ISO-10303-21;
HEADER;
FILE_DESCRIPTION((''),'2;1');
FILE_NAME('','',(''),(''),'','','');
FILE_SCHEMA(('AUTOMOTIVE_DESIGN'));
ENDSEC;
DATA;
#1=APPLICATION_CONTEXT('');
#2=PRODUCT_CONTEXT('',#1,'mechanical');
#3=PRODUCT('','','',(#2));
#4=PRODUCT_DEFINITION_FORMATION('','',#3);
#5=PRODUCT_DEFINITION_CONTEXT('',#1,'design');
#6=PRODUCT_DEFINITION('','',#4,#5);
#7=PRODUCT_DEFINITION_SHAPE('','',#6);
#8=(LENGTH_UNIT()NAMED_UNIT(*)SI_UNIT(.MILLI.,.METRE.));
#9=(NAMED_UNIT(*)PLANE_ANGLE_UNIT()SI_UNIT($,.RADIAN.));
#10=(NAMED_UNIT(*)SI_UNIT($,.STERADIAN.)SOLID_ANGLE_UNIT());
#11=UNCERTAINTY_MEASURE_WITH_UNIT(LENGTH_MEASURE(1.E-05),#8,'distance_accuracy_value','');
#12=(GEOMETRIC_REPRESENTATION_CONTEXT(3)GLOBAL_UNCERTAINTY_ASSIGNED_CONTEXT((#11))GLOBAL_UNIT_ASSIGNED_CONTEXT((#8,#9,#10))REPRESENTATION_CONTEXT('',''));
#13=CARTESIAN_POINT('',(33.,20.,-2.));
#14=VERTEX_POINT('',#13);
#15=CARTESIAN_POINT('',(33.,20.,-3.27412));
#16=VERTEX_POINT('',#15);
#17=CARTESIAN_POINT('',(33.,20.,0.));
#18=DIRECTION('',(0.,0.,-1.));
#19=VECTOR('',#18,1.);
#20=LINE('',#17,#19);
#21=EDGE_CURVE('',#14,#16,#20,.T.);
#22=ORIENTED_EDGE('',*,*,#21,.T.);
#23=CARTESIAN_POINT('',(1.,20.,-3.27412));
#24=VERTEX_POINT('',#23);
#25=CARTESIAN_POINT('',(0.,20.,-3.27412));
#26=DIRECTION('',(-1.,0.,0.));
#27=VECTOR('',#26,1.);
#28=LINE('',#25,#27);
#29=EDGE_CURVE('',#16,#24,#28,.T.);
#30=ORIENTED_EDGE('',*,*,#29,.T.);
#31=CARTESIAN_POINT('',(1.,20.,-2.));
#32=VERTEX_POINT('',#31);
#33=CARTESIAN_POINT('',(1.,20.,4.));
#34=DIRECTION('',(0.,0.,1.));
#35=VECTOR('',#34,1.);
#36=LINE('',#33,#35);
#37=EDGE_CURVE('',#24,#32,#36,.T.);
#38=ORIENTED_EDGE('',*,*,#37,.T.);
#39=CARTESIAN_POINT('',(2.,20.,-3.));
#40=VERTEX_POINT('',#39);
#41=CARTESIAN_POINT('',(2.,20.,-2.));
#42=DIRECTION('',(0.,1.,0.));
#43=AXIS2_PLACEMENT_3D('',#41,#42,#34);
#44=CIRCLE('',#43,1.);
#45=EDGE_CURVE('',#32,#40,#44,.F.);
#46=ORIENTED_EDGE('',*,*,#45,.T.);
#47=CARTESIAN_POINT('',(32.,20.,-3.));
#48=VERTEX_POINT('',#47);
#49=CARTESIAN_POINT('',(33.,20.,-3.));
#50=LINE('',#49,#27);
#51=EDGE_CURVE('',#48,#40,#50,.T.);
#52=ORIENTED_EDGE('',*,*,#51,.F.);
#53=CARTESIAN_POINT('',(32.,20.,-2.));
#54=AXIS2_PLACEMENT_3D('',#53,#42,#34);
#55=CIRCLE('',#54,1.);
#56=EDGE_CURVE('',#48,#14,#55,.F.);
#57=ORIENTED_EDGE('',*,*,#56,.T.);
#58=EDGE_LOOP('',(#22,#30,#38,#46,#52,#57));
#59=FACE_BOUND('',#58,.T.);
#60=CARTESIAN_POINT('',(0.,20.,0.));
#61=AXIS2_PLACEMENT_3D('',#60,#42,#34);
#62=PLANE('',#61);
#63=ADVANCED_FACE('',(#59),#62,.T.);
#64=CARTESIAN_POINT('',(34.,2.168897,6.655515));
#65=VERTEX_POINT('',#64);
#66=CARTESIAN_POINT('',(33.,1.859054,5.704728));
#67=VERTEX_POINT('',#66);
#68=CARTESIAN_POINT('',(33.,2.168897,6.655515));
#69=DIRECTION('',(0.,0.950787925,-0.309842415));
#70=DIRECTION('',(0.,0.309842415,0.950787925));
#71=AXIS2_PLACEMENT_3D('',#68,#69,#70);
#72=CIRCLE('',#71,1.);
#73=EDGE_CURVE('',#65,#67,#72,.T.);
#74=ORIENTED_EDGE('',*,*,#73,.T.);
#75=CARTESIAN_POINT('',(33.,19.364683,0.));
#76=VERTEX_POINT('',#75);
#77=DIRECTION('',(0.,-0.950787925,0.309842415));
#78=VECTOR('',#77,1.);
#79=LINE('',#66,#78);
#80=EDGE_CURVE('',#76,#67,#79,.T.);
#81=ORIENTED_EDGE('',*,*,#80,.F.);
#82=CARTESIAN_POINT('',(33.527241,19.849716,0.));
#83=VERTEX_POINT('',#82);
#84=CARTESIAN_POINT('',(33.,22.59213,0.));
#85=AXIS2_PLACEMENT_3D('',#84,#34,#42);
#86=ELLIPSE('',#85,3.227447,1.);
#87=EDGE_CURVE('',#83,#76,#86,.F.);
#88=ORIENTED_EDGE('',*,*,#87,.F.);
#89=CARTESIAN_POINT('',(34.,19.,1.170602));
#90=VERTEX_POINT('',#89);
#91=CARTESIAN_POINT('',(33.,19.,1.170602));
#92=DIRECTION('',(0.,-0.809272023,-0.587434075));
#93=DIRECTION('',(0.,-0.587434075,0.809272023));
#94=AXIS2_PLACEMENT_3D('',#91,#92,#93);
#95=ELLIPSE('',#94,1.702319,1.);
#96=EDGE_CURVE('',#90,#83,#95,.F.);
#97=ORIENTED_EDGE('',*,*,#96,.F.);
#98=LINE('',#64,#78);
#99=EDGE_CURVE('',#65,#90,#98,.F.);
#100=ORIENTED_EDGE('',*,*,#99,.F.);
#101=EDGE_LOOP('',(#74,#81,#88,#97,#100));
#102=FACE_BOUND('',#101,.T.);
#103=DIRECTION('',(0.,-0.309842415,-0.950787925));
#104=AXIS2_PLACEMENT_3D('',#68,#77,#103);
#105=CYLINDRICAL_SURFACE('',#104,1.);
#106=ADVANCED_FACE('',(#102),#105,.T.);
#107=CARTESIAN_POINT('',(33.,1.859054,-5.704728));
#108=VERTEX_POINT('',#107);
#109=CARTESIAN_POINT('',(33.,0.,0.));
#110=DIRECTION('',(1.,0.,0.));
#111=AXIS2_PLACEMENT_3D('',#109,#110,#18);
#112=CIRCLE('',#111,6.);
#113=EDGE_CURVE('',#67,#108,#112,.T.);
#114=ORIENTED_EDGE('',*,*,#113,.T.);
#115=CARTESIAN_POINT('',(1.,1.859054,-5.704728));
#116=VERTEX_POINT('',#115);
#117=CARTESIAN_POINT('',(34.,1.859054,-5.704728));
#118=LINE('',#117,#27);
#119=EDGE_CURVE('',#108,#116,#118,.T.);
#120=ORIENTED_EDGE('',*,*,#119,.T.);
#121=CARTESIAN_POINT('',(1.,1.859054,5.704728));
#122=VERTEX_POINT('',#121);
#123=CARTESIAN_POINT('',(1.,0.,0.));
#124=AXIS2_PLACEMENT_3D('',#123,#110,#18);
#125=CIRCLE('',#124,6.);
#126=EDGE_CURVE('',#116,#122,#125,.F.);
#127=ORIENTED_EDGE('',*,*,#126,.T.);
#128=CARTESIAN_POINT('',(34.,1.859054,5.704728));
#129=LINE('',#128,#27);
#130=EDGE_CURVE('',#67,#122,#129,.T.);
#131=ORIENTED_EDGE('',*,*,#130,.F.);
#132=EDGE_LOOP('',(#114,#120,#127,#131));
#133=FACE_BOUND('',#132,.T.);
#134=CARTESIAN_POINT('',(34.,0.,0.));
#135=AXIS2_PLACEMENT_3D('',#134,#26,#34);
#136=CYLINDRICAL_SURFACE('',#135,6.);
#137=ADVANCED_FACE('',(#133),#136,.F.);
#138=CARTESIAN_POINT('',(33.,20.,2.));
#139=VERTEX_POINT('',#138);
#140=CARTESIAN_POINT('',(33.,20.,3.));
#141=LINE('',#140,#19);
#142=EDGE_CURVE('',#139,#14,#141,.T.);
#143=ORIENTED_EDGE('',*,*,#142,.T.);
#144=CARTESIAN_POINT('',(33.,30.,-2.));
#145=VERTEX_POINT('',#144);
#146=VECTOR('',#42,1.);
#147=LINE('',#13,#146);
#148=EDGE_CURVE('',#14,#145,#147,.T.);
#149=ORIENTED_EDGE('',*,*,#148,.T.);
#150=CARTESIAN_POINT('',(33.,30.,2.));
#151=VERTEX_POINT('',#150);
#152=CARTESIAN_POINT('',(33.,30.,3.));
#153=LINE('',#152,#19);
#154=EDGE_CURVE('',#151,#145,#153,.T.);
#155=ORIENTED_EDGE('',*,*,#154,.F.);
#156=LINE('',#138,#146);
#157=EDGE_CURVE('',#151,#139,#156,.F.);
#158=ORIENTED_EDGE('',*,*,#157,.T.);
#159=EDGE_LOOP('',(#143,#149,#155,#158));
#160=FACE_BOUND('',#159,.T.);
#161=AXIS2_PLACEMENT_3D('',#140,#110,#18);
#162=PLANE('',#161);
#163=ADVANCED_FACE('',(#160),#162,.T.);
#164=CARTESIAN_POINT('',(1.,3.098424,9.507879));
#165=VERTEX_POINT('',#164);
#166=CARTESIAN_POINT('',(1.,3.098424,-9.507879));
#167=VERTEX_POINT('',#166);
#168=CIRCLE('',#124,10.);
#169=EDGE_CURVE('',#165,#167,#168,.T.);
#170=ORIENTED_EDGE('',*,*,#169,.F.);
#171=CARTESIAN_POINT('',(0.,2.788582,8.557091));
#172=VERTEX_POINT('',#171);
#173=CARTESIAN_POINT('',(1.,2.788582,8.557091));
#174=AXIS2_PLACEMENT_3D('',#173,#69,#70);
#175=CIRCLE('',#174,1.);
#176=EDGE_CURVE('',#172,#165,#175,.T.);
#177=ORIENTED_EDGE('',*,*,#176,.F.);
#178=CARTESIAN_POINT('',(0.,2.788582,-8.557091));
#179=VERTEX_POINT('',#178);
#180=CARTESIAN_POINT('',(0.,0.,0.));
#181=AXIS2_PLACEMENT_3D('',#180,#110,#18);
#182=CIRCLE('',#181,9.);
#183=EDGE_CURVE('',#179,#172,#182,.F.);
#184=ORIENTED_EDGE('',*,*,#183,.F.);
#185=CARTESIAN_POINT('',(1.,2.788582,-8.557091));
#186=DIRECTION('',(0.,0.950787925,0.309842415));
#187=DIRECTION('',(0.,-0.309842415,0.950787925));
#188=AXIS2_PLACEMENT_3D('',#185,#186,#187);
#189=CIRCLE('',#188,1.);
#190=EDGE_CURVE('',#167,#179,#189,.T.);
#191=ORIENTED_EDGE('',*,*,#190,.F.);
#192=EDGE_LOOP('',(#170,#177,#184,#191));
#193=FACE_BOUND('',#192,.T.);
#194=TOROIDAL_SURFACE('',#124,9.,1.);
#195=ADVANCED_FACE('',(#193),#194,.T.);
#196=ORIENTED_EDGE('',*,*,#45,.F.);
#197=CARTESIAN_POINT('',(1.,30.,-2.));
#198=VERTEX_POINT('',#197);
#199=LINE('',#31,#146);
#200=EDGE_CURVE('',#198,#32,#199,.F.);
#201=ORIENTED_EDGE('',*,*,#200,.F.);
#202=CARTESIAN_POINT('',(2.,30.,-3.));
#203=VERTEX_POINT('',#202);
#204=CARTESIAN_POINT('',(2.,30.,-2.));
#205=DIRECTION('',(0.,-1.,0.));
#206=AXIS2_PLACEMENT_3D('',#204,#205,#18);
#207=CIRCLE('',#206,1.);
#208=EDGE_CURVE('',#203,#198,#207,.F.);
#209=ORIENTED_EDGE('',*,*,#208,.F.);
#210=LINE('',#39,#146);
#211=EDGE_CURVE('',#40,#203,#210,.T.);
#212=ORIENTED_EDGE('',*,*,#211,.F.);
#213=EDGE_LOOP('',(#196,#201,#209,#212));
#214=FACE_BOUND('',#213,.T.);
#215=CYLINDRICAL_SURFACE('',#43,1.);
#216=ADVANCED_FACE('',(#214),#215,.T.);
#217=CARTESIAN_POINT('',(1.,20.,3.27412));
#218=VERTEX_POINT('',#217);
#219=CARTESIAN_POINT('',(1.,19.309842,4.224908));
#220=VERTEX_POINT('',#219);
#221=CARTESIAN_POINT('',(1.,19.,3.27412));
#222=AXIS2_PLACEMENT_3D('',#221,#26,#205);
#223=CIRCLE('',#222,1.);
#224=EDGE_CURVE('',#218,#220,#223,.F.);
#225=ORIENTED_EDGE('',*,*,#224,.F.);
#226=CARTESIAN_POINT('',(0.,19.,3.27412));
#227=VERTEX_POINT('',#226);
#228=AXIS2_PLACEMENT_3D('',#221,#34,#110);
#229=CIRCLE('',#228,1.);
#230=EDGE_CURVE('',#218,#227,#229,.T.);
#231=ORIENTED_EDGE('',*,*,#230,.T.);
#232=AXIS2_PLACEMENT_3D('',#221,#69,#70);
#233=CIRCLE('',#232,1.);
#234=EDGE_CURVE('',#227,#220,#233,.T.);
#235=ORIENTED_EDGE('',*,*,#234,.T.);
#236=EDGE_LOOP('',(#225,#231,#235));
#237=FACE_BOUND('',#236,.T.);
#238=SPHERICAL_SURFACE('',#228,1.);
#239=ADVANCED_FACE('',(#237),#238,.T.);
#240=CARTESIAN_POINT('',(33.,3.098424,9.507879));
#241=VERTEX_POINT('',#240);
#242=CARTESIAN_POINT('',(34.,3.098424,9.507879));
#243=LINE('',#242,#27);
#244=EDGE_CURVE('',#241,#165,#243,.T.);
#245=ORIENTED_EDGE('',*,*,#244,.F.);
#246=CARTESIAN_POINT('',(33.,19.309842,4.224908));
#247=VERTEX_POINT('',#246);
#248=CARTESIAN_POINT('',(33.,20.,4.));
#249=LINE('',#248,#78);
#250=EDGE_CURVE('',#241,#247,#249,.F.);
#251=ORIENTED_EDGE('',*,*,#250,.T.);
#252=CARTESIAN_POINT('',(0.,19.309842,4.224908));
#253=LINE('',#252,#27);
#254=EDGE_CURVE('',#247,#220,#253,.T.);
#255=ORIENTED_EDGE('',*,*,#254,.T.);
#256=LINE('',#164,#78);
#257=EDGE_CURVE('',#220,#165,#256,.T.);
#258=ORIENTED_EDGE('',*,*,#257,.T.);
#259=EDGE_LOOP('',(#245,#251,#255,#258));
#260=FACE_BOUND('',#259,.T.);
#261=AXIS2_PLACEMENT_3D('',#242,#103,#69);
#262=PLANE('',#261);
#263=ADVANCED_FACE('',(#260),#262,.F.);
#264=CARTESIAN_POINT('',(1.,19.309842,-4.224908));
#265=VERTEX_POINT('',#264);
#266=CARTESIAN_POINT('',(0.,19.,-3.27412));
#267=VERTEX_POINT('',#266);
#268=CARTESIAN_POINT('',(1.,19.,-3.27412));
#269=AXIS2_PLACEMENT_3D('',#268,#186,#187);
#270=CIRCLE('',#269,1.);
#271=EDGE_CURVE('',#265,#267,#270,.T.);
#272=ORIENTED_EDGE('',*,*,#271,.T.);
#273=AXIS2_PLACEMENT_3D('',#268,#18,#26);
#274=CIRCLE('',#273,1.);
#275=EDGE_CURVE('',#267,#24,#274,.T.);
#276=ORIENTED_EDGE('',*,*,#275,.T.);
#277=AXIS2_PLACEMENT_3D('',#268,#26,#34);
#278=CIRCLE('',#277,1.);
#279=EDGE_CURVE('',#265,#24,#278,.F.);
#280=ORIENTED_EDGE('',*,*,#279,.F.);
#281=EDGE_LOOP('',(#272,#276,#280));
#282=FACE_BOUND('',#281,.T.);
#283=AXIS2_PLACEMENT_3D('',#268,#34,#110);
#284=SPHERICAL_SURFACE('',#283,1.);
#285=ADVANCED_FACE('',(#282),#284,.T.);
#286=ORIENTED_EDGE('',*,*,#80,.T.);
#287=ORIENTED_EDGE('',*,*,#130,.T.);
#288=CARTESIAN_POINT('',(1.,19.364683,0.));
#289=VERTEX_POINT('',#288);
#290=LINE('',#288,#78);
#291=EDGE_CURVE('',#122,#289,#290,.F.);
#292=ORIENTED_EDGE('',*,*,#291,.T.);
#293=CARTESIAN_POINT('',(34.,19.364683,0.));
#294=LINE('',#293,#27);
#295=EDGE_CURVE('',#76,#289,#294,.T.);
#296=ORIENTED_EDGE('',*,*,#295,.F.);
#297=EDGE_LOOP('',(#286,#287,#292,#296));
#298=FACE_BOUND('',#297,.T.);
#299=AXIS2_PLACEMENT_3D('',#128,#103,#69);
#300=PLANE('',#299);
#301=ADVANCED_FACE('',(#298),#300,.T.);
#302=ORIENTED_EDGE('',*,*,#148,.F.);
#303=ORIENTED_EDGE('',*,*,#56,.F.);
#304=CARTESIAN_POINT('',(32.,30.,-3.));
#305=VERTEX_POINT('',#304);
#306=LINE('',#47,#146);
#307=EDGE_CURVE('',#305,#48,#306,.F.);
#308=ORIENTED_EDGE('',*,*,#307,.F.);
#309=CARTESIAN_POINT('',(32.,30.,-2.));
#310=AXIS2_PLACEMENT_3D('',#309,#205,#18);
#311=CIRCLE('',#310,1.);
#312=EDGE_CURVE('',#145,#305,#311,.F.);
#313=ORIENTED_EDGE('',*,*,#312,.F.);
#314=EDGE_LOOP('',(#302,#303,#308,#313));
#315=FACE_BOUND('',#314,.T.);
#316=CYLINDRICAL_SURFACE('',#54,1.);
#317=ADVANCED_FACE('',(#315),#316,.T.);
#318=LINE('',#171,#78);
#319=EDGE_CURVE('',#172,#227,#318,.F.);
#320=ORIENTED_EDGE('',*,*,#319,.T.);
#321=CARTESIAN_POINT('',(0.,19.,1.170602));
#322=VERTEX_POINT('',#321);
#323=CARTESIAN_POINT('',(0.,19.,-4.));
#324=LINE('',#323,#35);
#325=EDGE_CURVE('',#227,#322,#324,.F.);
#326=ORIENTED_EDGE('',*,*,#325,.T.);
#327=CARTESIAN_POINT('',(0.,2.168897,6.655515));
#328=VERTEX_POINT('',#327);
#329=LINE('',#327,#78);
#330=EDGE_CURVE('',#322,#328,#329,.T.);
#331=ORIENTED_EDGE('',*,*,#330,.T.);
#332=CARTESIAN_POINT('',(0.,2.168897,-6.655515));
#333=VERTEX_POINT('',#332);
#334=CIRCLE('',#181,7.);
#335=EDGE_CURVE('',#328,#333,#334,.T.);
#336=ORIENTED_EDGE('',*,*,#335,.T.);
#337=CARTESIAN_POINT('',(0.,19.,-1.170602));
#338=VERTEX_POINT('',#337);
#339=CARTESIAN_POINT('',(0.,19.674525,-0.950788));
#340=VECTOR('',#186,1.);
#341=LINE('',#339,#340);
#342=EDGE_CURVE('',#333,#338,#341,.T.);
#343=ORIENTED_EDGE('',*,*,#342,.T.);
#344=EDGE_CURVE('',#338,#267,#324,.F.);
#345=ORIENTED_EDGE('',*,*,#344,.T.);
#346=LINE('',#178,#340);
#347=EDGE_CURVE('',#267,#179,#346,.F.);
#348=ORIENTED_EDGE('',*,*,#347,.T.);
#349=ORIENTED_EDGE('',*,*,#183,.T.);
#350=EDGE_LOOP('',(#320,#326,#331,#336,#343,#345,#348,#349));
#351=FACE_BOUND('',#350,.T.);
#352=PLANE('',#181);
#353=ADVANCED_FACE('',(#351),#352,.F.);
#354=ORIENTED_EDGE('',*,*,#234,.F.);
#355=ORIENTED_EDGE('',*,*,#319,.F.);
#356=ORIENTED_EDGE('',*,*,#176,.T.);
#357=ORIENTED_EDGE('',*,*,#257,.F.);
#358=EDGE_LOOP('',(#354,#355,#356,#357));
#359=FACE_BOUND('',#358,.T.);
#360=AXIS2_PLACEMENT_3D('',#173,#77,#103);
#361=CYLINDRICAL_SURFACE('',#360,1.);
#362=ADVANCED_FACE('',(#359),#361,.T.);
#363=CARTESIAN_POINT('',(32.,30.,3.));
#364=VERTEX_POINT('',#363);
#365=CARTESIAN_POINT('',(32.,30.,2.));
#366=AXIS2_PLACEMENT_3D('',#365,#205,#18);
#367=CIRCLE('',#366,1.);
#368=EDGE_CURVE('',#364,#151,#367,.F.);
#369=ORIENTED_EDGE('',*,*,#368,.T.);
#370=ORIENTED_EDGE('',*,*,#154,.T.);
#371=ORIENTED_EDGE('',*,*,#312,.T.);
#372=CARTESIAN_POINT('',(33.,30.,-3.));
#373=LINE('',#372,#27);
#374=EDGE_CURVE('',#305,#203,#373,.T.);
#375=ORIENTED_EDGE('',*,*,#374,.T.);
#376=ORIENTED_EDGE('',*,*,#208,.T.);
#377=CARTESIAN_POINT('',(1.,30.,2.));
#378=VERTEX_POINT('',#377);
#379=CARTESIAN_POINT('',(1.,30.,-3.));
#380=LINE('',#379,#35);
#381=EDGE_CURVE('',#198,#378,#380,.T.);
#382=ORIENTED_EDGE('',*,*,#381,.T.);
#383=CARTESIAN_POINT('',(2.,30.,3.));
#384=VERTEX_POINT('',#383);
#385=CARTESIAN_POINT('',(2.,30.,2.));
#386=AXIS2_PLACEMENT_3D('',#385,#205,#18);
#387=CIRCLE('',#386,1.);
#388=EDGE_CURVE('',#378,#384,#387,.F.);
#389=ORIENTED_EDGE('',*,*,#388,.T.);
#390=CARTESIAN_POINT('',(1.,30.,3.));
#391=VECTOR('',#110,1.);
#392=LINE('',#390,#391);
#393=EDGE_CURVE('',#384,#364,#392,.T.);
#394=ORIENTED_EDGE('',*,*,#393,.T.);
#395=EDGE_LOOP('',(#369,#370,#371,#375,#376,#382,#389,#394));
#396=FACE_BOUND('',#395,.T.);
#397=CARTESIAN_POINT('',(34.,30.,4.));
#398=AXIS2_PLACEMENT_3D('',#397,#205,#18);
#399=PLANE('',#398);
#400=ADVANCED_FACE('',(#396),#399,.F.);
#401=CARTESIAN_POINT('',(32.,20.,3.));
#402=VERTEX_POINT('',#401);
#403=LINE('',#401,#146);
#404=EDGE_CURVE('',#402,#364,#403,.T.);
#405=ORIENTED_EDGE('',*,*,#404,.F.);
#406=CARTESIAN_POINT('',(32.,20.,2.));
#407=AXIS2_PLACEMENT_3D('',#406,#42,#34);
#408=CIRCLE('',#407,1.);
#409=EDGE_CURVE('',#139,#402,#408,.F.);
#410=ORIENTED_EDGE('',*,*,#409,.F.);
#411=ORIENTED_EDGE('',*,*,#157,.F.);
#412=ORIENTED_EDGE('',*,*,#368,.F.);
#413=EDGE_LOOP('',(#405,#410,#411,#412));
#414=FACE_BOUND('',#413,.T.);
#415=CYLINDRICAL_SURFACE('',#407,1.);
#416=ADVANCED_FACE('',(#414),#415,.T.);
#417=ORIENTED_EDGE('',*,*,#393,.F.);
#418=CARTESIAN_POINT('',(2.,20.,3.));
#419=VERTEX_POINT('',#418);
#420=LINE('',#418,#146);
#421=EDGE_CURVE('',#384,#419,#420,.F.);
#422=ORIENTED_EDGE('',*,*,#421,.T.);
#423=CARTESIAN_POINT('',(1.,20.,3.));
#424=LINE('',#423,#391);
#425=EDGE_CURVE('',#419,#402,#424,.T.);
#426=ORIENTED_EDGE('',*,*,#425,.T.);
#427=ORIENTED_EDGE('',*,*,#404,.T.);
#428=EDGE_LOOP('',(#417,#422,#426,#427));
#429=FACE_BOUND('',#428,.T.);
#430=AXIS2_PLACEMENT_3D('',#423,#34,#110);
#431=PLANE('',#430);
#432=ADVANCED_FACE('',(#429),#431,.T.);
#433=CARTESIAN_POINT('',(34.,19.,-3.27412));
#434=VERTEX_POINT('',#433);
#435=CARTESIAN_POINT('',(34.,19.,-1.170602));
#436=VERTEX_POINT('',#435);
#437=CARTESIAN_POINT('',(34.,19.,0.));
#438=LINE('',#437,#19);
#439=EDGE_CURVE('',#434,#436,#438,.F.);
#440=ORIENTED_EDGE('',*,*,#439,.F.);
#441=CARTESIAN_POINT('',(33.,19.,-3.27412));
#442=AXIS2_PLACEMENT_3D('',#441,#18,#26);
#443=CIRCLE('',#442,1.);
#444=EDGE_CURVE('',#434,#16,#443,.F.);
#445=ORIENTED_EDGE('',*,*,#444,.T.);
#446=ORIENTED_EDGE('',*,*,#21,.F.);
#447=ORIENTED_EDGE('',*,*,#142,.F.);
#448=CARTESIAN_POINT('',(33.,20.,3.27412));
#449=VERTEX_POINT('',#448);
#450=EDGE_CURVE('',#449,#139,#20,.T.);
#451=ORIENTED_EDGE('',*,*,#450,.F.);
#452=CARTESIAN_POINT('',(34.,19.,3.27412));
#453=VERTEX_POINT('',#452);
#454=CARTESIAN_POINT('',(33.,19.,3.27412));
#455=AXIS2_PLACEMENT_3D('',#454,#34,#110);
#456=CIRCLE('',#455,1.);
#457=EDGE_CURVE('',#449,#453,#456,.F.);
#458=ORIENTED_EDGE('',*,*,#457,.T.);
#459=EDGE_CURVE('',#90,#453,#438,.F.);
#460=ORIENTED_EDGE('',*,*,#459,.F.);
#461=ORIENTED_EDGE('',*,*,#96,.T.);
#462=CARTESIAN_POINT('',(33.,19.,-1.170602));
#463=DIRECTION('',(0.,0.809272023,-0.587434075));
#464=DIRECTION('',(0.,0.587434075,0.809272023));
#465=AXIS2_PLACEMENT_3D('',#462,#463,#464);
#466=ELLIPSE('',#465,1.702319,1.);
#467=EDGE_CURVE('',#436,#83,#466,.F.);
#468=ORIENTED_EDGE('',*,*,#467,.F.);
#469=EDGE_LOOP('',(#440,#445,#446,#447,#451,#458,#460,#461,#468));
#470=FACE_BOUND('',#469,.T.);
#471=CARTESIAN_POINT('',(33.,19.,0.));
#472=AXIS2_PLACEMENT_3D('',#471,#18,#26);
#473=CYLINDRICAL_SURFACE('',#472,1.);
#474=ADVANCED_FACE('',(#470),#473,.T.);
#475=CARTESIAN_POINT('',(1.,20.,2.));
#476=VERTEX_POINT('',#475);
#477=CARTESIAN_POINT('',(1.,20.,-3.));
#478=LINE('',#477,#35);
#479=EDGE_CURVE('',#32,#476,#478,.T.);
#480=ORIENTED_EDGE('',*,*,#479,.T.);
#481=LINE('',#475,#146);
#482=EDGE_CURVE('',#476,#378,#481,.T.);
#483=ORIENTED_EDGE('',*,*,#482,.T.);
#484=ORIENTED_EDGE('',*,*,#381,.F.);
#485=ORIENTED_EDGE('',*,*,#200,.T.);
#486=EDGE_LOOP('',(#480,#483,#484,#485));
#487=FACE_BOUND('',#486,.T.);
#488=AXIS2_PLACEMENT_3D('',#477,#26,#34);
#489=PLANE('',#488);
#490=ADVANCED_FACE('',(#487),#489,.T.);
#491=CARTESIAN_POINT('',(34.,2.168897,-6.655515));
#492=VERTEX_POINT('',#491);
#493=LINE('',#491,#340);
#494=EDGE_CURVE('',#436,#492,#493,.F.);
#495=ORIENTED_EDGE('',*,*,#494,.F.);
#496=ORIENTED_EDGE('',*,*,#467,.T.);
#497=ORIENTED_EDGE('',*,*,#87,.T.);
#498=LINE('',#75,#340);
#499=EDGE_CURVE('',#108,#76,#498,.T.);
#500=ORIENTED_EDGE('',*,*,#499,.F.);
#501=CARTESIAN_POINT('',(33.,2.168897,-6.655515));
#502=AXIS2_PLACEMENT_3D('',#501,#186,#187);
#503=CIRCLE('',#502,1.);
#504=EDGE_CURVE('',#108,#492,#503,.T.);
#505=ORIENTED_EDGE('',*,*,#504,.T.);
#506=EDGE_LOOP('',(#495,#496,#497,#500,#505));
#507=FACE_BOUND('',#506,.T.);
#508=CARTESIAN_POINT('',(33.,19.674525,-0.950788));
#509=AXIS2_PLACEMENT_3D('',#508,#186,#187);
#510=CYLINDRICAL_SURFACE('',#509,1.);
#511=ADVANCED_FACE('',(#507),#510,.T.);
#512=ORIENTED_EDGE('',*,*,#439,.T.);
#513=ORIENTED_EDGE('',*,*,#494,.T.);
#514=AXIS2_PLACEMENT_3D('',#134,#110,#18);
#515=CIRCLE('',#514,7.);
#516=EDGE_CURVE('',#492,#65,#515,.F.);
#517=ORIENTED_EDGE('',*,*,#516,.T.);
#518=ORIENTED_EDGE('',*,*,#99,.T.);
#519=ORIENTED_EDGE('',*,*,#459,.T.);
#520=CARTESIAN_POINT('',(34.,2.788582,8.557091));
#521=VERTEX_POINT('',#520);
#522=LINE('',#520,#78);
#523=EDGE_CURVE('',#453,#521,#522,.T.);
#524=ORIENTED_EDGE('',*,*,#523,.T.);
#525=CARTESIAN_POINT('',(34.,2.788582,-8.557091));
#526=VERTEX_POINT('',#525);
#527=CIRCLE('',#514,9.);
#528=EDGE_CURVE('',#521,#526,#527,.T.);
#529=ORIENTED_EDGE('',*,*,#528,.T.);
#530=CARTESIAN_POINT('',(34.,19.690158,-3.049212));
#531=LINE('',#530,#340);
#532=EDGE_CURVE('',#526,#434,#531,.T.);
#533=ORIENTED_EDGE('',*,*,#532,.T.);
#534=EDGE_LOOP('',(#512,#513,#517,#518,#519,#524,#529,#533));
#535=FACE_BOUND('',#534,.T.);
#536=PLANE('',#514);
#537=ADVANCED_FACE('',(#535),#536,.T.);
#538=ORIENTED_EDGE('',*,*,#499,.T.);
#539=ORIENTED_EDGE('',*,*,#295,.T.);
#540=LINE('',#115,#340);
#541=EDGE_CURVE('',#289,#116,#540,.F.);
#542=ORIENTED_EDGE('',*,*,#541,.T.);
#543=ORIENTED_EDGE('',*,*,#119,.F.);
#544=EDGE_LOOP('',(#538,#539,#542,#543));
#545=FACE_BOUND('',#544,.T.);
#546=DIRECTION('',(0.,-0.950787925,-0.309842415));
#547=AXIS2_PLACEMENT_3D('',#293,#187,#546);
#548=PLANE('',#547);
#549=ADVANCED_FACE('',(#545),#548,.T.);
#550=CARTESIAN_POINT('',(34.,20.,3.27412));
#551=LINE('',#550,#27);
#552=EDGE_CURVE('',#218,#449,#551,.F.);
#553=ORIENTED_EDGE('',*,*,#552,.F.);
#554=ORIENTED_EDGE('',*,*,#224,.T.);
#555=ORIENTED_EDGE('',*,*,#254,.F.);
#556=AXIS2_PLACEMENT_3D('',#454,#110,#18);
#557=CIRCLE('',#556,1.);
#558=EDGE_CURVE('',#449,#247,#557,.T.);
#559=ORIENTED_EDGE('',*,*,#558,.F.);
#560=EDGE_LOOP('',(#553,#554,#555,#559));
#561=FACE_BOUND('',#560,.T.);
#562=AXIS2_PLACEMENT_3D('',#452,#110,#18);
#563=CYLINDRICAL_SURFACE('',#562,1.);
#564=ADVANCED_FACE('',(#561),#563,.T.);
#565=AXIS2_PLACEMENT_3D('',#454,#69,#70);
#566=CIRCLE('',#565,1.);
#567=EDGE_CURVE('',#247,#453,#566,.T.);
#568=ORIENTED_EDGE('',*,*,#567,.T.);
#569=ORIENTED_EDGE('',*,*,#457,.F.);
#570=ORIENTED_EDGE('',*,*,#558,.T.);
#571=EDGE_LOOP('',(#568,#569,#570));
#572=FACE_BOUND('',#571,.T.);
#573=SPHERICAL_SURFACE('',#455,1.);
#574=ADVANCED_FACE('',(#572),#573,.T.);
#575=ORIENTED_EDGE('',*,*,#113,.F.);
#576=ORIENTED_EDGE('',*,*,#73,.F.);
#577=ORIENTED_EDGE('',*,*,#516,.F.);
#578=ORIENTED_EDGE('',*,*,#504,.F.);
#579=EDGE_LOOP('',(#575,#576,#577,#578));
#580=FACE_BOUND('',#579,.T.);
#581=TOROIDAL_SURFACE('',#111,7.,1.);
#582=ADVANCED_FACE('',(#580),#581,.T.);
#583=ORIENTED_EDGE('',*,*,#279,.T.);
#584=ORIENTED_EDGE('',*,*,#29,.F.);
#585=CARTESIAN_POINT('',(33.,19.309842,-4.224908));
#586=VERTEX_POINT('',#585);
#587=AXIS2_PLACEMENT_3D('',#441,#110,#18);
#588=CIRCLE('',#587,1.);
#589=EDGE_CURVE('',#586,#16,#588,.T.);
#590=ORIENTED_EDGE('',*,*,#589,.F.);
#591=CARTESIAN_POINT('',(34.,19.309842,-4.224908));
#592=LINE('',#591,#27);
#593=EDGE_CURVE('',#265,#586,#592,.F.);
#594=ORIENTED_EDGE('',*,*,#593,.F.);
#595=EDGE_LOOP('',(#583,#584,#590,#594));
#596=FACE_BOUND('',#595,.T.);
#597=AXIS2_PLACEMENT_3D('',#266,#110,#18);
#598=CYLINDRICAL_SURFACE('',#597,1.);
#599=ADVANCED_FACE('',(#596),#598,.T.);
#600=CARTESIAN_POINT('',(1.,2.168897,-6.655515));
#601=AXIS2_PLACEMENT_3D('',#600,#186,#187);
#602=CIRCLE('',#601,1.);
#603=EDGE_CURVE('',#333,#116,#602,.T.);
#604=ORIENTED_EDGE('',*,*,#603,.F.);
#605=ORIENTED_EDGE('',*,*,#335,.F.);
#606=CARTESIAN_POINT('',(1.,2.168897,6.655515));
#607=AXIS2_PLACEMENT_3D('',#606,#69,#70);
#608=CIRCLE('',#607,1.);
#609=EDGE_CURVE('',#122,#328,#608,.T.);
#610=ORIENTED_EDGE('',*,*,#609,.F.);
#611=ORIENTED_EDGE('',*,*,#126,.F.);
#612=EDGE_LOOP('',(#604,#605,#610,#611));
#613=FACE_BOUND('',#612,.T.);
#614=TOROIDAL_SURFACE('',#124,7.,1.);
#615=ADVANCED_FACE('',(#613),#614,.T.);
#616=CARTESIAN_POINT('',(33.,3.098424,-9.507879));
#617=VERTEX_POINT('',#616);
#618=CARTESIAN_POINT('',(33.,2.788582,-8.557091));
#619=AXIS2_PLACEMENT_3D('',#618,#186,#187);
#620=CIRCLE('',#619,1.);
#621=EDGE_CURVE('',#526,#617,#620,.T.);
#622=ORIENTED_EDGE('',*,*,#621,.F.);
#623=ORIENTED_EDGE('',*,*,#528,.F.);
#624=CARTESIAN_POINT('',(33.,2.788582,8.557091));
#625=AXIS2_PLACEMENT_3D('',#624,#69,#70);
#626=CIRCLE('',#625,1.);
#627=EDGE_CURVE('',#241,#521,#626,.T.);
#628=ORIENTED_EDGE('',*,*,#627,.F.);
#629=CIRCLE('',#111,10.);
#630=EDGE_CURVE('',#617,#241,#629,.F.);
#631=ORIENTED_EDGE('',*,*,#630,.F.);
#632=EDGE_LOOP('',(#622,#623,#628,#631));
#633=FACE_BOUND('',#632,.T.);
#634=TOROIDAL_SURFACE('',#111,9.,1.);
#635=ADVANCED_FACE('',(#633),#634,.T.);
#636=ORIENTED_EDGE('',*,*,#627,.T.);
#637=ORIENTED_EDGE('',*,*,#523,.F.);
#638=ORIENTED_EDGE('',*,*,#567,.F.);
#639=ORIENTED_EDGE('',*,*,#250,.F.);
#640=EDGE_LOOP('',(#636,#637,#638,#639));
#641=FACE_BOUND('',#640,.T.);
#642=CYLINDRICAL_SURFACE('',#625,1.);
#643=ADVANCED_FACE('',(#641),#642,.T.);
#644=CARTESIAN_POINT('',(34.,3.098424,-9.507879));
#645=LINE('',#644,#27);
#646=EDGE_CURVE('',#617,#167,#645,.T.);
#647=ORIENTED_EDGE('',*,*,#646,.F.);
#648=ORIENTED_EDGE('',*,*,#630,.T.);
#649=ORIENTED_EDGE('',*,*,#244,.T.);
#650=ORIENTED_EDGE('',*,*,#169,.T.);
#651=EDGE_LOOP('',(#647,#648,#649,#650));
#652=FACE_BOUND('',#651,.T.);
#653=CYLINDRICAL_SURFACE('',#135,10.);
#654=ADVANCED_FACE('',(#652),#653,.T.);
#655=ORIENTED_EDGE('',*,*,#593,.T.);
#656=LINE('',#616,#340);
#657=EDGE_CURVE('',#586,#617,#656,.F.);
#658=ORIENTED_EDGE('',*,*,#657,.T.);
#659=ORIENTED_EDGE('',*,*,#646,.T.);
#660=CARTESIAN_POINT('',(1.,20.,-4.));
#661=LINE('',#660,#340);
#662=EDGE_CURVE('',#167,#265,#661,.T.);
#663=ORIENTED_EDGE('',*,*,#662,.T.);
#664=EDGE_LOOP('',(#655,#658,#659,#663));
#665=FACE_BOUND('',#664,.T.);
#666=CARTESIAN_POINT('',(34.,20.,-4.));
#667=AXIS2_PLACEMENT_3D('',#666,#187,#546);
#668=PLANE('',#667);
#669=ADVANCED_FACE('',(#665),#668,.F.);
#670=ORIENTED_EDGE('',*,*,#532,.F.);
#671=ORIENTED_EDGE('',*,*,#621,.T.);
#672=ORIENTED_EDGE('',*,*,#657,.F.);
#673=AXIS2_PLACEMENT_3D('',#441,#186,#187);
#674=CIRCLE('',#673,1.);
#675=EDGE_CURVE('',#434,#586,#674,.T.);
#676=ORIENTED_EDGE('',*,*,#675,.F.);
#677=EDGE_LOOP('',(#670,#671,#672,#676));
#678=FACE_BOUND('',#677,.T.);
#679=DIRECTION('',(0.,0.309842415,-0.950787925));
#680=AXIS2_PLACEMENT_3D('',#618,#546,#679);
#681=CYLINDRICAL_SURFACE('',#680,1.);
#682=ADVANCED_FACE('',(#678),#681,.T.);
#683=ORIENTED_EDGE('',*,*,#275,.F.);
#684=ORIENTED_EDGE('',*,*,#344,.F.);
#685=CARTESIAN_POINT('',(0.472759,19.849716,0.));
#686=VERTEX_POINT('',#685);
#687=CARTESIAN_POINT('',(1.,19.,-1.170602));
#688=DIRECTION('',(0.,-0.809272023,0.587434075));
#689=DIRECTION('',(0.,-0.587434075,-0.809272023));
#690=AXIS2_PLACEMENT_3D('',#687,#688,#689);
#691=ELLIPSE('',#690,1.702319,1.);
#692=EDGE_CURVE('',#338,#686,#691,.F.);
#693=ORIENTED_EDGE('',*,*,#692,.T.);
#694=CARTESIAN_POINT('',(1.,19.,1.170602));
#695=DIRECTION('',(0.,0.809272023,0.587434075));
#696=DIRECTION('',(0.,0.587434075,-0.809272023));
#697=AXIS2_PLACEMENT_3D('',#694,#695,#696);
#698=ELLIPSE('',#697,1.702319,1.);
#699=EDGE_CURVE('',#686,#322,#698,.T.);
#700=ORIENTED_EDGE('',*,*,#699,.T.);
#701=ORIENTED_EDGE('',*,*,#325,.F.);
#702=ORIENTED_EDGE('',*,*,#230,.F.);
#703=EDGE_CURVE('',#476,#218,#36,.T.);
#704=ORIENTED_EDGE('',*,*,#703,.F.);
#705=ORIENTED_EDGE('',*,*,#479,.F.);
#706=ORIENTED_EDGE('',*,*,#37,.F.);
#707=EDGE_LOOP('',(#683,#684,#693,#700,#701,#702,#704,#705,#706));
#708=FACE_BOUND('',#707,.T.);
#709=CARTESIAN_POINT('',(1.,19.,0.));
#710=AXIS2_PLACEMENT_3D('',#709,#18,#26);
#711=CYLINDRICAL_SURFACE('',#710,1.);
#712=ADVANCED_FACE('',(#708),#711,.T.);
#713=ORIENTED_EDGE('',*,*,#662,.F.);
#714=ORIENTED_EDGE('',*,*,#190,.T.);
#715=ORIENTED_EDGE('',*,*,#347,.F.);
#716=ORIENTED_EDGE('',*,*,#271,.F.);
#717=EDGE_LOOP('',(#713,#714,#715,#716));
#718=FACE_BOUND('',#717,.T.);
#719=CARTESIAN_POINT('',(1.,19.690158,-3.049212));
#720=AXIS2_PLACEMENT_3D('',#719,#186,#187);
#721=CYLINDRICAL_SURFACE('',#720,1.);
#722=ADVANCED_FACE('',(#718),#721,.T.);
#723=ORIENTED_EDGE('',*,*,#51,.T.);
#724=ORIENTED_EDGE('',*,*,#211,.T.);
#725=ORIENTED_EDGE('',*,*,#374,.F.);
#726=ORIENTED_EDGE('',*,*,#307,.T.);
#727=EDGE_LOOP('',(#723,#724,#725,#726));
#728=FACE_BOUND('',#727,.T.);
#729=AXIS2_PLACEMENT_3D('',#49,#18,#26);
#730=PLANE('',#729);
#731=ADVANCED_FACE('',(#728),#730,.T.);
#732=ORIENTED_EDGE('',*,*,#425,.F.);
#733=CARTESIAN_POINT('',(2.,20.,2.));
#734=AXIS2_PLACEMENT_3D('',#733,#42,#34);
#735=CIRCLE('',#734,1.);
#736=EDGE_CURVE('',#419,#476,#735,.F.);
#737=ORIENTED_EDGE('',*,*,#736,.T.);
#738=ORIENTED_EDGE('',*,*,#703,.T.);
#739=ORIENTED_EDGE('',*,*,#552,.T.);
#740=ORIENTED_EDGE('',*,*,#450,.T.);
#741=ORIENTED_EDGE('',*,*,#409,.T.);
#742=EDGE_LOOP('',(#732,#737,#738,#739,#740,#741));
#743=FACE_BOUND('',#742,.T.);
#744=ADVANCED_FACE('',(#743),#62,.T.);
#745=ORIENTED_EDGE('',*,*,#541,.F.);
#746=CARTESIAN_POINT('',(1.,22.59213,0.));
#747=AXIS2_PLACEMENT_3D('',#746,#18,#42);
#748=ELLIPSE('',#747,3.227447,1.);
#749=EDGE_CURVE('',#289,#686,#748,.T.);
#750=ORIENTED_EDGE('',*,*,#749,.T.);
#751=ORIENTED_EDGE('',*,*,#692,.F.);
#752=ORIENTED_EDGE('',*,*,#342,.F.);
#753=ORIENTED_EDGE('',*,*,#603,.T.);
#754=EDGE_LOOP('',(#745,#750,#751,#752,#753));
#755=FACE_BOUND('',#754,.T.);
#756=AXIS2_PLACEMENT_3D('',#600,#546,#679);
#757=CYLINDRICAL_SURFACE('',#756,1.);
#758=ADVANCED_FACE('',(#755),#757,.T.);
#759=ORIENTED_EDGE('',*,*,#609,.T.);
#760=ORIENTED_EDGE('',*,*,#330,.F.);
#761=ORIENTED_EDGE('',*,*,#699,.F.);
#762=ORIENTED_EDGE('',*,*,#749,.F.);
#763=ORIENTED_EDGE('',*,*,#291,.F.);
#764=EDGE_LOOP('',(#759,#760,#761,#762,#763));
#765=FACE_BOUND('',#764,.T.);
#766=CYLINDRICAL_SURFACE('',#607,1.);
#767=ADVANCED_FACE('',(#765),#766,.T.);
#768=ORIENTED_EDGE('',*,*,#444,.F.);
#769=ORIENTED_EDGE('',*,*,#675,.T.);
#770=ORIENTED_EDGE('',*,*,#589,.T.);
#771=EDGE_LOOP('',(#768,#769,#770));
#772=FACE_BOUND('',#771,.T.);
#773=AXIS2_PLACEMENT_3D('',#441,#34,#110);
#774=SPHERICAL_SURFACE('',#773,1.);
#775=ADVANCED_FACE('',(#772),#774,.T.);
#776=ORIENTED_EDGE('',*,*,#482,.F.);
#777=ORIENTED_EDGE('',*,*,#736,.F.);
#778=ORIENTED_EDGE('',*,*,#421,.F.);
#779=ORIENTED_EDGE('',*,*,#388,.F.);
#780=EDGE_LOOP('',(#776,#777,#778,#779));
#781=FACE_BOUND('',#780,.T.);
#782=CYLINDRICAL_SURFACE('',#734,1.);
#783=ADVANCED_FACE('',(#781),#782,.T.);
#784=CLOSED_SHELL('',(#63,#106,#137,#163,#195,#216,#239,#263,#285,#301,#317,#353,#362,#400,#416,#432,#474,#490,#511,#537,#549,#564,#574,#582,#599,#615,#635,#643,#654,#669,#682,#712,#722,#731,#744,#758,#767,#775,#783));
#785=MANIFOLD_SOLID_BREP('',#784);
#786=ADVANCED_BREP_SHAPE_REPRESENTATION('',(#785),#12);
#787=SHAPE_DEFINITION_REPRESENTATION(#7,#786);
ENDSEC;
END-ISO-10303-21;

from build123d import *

# Parameters (mm, degrees)
BOSS_EXTRUDE1_DEPTH = 34
SKETCH2_W           = 34
SKETCH2_H           = 8
SKETCH2_W_2         = 32
SKETCH2_H_2         = 6
CUT_EXTRUDE1_DEPTH  = 10
FILLET1_R           = 1
FILLET2_R           = 1


with BuildPart() as part:
    # Sketch1 → Boss-Extrude1 (new body)
    with BuildSketch(Plane(origin=(0, 0, 0), x_dir=(0, 0, -1), z_dir=(1, 0, 0))):
        with BuildLine():
            Line((-9.507879247, 3.098424151), (-4, 20))
            Line((-4, 20), (-4, 30))
            Line((-4, 30), (4, 30))
            Line((4, 30), (4, 20))
            Line((4, 20), (9.507879247, 3.098424151))
            ThreePointArc((9.507879247, 3.098424151), (0, -10), (-9.507879247, 3.098424151))
        make_face()
        with BuildLine():
            Line((-5.704727548, 1.85905449), (0, 19.364682524))
            Line((0, 19.364682524), (5.704727548, 1.85905449))
            ThreePointArc((5.704727548, 1.85905449), (0, -6), (-5.704727548, 1.85905449))
        make_face(mode=Mode.SUBTRACT)
    extrude(amount=BOSS_EXTRUDE1_DEPTH)

    # Sketch2 → Cut-Extrude1 (cut)
    with BuildSketch(Plane(origin=(0, 30, 0), x_dir=(1, 0, 0), z_dir=(0, 1, 0))):
        with Locations((17, 0)):
            Rectangle(SKETCH2_W, SKETCH2_H)
        with Locations((17, 0)):
            Rectangle(SKETCH2_W_2, SKETCH2_H_2, mode=Mode.SUBTRACT)
    extrude(amount=-CUT_EXTRUDE1_DEPTH, mode=Mode.SUBTRACT)

    # Fillet1
    # the kernel refuses this fillet: 1 mm, written as the material it takes off along each edge
    with BuildSketch(Plane(origin=(1, 19, 3.274120372), x_dir=(0, 0.3098424150516233, 0.9507879247418836), z_dir=(-1, 0, 0))) as fillet1_piece_1_section:
        Polygon((0, 0), (FILLET1_R * 1.02, 0), (FILLET1_R * 1.02, FILLET1_R * 0.740397220377), (FILLET1_R * 0.316039263353, FILLET1_R * 0.969803683237), align=None)
    fillet1_piece_1 = extrude(amount=FILLET1_R * 1.02, mode=Mode.PRIVATE)
    fillet1_piece_1 = fillet1_piece_1 - Plane(origin=(1, 19, 3.274120372), x_dir=(0, -0.8092720231948041, -0.5874340750026239), z_dir=(-1, 0, 0)) * Sphere(FILLET1_R, mode=Mode.PRIVATE)
    add(fillet1_piece_1, mode=Mode.SUBTRACT)
    with BuildSketch(Plane(origin=(33, 19, 3.274120372), x_dir=(0, 0.3098424150516233, 0.9507879247418836), z_dir=(1, 0, 0))) as fillet1_piece_2_section:
        Polygon((0, 0), (FILLET1_R * 1.02, 0), (FILLET1_R * 1.02, -FILLET1_R * 0.740397220377), (FILLET1_R * 0.316039263353, -FILLET1_R * 0.969803683237), align=None)
    fillet1_piece_2 = extrude(amount=FILLET1_R * 1.02, mode=Mode.PRIVATE)
    fillet1_piece_2 = fillet1_piece_2 - Plane(origin=(33, 19, 3.274120372), x_dir=(0, -0.8092720231948041, -0.5874340750026239), z_dir=(1, 0, 0)) * Sphere(FILLET1_R, mode=Mode.PRIVATE)
    add(fillet1_piece_2, mode=Mode.SUBTRACT)
    with BuildSketch(Plane(origin=(1, 19, -3.274120372), x_dir=(0, 0.3098424150516232, -0.9507879247418838), z_dir=(-1, 0, 0))) as fillet1_piece_3_section:
        Polygon((0, 0), (FILLET1_R * 1.02, 0), (FILLET1_R * 1.02, -FILLET1_R * 0.740397220377), (FILLET1_R * 0.316039263353, -FILLET1_R * 0.969803683237), align=None)
    fillet1_piece_3 = extrude(amount=FILLET1_R * 1.02, mode=Mode.PRIVATE)
    fillet1_piece_3 = fillet1_piece_3 - Plane(origin=(1, 19, -3.274120372), x_dir=(0, -0.8092720231948041, 0.587434075002624), z_dir=(-1, 0, 0)) * Sphere(FILLET1_R, mode=Mode.PRIVATE)
    add(fillet1_piece_3, mode=Mode.SUBTRACT)
    with BuildSketch(Plane(origin=(33, 19, -3.274120372), x_dir=(0, 0.3098424150516232, -0.9507879247418838), z_dir=(1, 0, 0))) as fillet1_piece_4_section:
        Polygon((0, 0), (FILLET1_R * 1.02, 0), (FILLET1_R * 1.02, FILLET1_R * 0.740397220377), (FILLET1_R * 0.316039263353, FILLET1_R * 0.969803683237), align=None)
    fillet1_piece_4 = extrude(amount=FILLET1_R * 1.02, mode=Mode.PRIVATE)
    fillet1_piece_4 = fillet1_piece_4 - Plane(origin=(33, 19, -3.274120372), x_dir=(0, -0.8092720231948041, 0.587434075002624), z_dir=(1, 0, 0)) * Sphere(FILLET1_R, mode=Mode.PRIVATE)
    add(fillet1_piece_4, mode=Mode.SUBTRACT)
    with BuildSketch(Plane(origin=(1, 20, 4), x_dir=(0, -0.9507879247418841, 0.30984241505162113), z_dir=(1, 0, 0)), Plane(origin=(1, 20, -4), x_dir=(0, 0, 1), z_dir=(1, 0, 0))) as fillet1_piece_5:
        with BuildLine():
            CenterArc((FILLET1_R * 0.725879627821, FILLET1_R), FILLET1_R, 198.04973395, 71.95026605)
            Line((-FILLET1_R * 0.224908296921, FILLET1_R * 0.690157584948), (-FILLET1_R * 0.243924055416, FILLET1_R * 0.683960736647))
            Line((-FILLET1_R * 0.243924055416, FILLET1_R * 0.683960736647), (-FILLET1_R * 0.0145175925564, -FILLET1_R * 0.02))
            Line((-FILLET1_R * 0.0145175925564, -FILLET1_R * 0.02), (FILLET1_R * 0.725879627821, -FILLET1_R * 0.02))
            Line((FILLET1_R * 0.725879627821, -FILLET1_R * 0.02), (FILLET1_R * 0.725879627821, 0))
        make_face()
    extrude(amount=32, mode=Mode.SUBTRACT)
    with BuildSketch(Plane(origin=(0, 0, 0), x_dir=(0, 0.3098424150516232, -0.9507879247418836), z_dir=(0, 0.9507879247418836, 0.3098424150516232))) as fillet1_piece_6:
        with BuildLine():
            CenterArc((6 + FILLET1_R, -FILLET1_R), FILLET1_R, 90, 90)
            Line((6, -FILLET1_R), (6 - FILLET1_R * 0.02, -FILLET1_R))
            Line((6 - FILLET1_R * 0.02, -FILLET1_R), (6 - FILLET1_R * 0.02, FILLET1_R * 0.02))
            Line((6 - FILLET1_R * 0.02, FILLET1_R * 0.02), (6 + FILLET1_R, FILLET1_R * 0.02))
            Line((6 + FILLET1_R, FILLET1_R * 0.02), (6 + FILLET1_R, 0))
        make_face()
    revolve(axis=Axis((0, 0, 0), (-1, 0, 0)), revolution_arc=216.0994679, mode=Mode.SUBTRACT)
    with BuildSketch(Plane(origin=(0, 21.741652336, 0.774606038), x_dir=(0, 0.30984241505162313, -0.9507879247418837), z_dir=(0, -0.9507879247418837, -0.30984241505162313))) as fillet1_piece_7_section:
        with BuildLine():
            CenterArc((FILLET1_R, FILLET1_R), FILLET1_R, 180, 90)
            Line((0, FILLET1_R), (-FILLET1_R * 0.02, FILLET1_R))
            Line((-FILLET1_R * 0.02, FILLET1_R), (-FILLET1_R * 0.02, -FILLET1_R * 0.02))
            Line((-FILLET1_R * 0.02, -FILLET1_R * 0.02), (FILLET1_R, -FILLET1_R * 0.02))
            Line((FILLET1_R, -FILLET1_R * 0.02), (FILLET1_R, 0))
        make_face()
    fillet1_piece_7 = extrude(amount=20.91170631, mode=Mode.PRIVATE)
    fillet1_piece_7 = split(fillet1_piece_7, bisect_by=Plane(origin=(0.224383955, 12.542231939, 2.223297658), z_dir=(0, -0.30984241505162313, -0.9507879247418837)), keep=Keep.TOP, mode=Mode.PRIVATE)
    add(fillet1_piece_7, mode=Mode.SUBTRACT)
    with BuildSketch(Plane(origin=(34, 3.098424151, 9.507879247), x_dir=(-1, 0, 0), z_dir=(0, 0.9507879247418836, -0.3098424150516233)), Plane(origin=(0, 19.309842415, -4.224908297), x_dir=(0, -0.3098424150516232, 0.9507879247418837), z_dir=(0, -0.9507879247418837, -0.3098424150516232))) as fillet1_piece_8:
        with BuildLine():
            CenterArc((FILLET1_R, -FILLET1_R), FILLET1_R, 90, 90)
            Line((0, -FILLET1_R), (-FILLET1_R * 0.02, -FILLET1_R))
            Line((-FILLET1_R * 0.02, -FILLET1_R), (-FILLET1_R * 0.02, FILLET1_R * 0.02))
            Line((-FILLET1_R * 0.02, FILLET1_R * 0.02), (FILLET1_R, FILLET1_R * 0.02))
            Line((FILLET1_R, FILLET1_R * 0.02), (FILLET1_R, 0))
        make_face()
    extrude(amount=17.050509207, mode=Mode.SUBTRACT)
    with BuildSketch(Plane(origin=(0, 1.85905449, 5.704727548), x_dir=(0, 0.3098424150516232, 0.9507879247418837), z_dir=(0, 0.9507879247418837, -0.30984241505162313))) as fillet1_piece_9_section:
        with BuildLine():
            CenterArc((FILLET1_R, FILLET1_R), FILLET1_R, 180, 90)
            Line((0, FILLET1_R), (-FILLET1_R * 0.02, FILLET1_R))
            Line((-FILLET1_R * 0.02, FILLET1_R), (-FILLET1_R * 0.02, -FILLET1_R * 0.02))
            Line((-FILLET1_R * 0.02, -FILLET1_R * 0.02), (FILLET1_R, -FILLET1_R * 0.02))
            Line((FILLET1_R, -FILLET1_R * 0.02), (FILLET1_R, 0))
        make_face()
    fillet1_piece_9 = extrude(amount=20.91170631, mode=Mode.PRIVATE)
    fillet1_piece_9 = split(fillet1_piece_9, bisect_by=Plane(origin=(0.224383955, 12.542231939, -2.223297658), z_dir=(0, -0.30984241505162313, 0.9507879247418837)), keep=Keep.TOP, mode=Mode.PRIVATE)
    add(fillet1_piece_9, mode=Mode.SUBTRACT)
    with BuildSketch(Plane(origin=(34, 0, 0), x_dir=(0, 0.3098424150516232, -0.9507879247418836), z_dir=(0, 0.9507879247418836, 0.3098424150516232))) as fillet1_piece_10:
        with BuildLine():
            CenterArc((6 + FILLET1_R, FILLET1_R), FILLET1_R, 180, 90)
            Line((6, FILLET1_R), (6 - FILLET1_R * 0.02, FILLET1_R))
            Line((6 - FILLET1_R * 0.02, FILLET1_R), (6 - FILLET1_R * 0.02, -FILLET1_R * 0.02))
            Line((6 - FILLET1_R * 0.02, -FILLET1_R * 0.02), (6 + FILLET1_R, -FILLET1_R * 0.02))
            Line((6 + FILLET1_R, -FILLET1_R * 0.02), (6 + FILLET1_R, 0))
        make_face()
    revolve(axis=Axis((34, 0, 0), (-1, 0, 0)), revolution_arc=216.0994679, mode=Mode.SUBTRACT)
    with BuildSketch(Plane(origin=(34, 21.741652336, 0.774606038), x_dir=(0, 0.30984241505162313, -0.9507879247418837), z_dir=(0, -0.9507879247418837, -0.30984241505162313))) as fillet1_piece_11_section:
        with BuildLine():
            CenterArc((FILLET1_R, -FILLET1_R), FILLET1_R, 90, 90)
            Line((0, -FILLET1_R), (-FILLET1_R * 0.02, -FILLET1_R))
            Line((-FILLET1_R * 0.02, -FILLET1_R), (-FILLET1_R * 0.02, FILLET1_R * 0.02))
            Line((-FILLET1_R * 0.02, FILLET1_R * 0.02), (FILLET1_R, FILLET1_R * 0.02))
            Line((FILLET1_R, FILLET1_R * 0.02), (FILLET1_R, 0))
        make_face()
    fillet1_piece_11 = extrude(amount=20.91170631, mode=Mode.PRIVATE)
    fillet1_piece_11 = split(fillet1_piece_11, bisect_by=Plane(origin=(33.775616045, 12.542231939, 2.223297658), z_dir=(0, -0.30984241505162313, -0.9507879247418837)), keep=Keep.TOP, mode=Mode.PRIVATE)
    add(fillet1_piece_11, mode=Mode.SUBTRACT)
    with BuildSketch(Plane(origin=(34, 1.85905449, 5.704727548), x_dir=(0, 0.3098424150516232, 0.9507879247418837), z_dir=(0, 0.9507879247418837, -0.30984241505162313))) as fillet1_piece_12_section:
        with BuildLine():
            CenterArc((FILLET1_R, -FILLET1_R), FILLET1_R, 90, 90)
            Line((0, -FILLET1_R), (-FILLET1_R * 0.02, -FILLET1_R))
            Line((-FILLET1_R * 0.02, -FILLET1_R), (-FILLET1_R * 0.02, FILLET1_R * 0.02))
            Line((-FILLET1_R * 0.02, FILLET1_R * 0.02), (FILLET1_R, FILLET1_R * 0.02))
            Line((FILLET1_R, FILLET1_R * 0.02), (FILLET1_R, 0))
        make_face()
    fillet1_piece_12 = extrude(amount=20.91170631, mode=Mode.PRIVATE)
    fillet1_piece_12 = split(fillet1_piece_12, bisect_by=Plane(origin=(33.775616045, 12.542231939, -2.223297658), z_dir=(0, -0.30984241505162313, 0.9507879247418837)), keep=Keep.TOP, mode=Mode.PRIVATE)
    add(fillet1_piece_12, mode=Mode.SUBTRACT)
    with BuildSketch(Plane(origin=(34, 20, 3.274120372), x_dir=(-1, 0, 0), z_dir=(0, 0, -1)), Plane(origin=(0, 20, -3.274120372), x_dir=(1, 0, 0), z_dir=(0, 0, 1))) as fillet1_piece_13:
        with BuildLine():
            CenterArc((FILLET1_R, -FILLET1_R), FILLET1_R, 90, 90)
            Line((0, -FILLET1_R), (-FILLET1_R * 0.02, -FILLET1_R))
            Line((-FILLET1_R * 0.02, -FILLET1_R), (-FILLET1_R * 0.02, FILLET1_R * 0.02))
            Line((-FILLET1_R * 0.02, FILLET1_R * 0.02), (FILLET1_R, FILLET1_R * 0.02))
            Line((FILLET1_R, FILLET1_R * 0.02), (FILLET1_R, 0))
        make_face()
    extrude(amount=6.548240744, mode=Mode.SUBTRACT)
    with BuildSketch(Plane(origin=(34, 0, 0), x_dir=(0, 0.3098424150516232, -0.9507879247418837), z_dir=(0, 0.9507879247418837, 0.3098424150516232))) as fillet1_piece_14:
        with BuildLine():
            CenterArc((10 - FILLET1_R, FILLET1_R), FILLET1_R, 270, 90)
            Line((10 - FILLET1_R, 0), (10 - FILLET1_R, -FILLET1_R * 0.02))
            Line((10 - FILLET1_R, -FILLET1_R * 0.02), (10 + FILLET1_R * 0.02, -FILLET1_R * 0.02))
            Line((10 + FILLET1_R * 0.02, -FILLET1_R * 0.02), (10 + FILLET1_R * 0.02, FILLET1_R))
            Line((10 + FILLET1_R * 0.02, FILLET1_R), (10, FILLET1_R))
        make_face()
    revolve(axis=Axis((34, 0, 0), (-1, 0, 0)), revolution_arc=216.0994679, mode=Mode.SUBTRACT)
    with BuildSketch(Plane(origin=(0, 3.098424151, 9.507879247), x_dir=(1, 0, 0), z_dir=(0, 0.9507879247418836, -0.3098424150516233)), Plane(origin=(34, 19.309842415, -4.224908297), x_dir=(0, -0.3098424150516232, 0.9507879247418837), z_dir=(0, -0.9507879247418837, -0.3098424150516232))) as fillet1_piece_15:
        with BuildLine():
            CenterArc((FILLET1_R, FILLET1_R), FILLET1_R, 180, 90)
            Line((0, FILLET1_R), (-FILLET1_R * 0.02, FILLET1_R))
            Line((-FILLET1_R * 0.02, FILLET1_R), (-FILLET1_R * 0.02, -FILLET1_R * 0.02))
            Line((-FILLET1_R * 0.02, -FILLET1_R * 0.02), (FILLET1_R, -FILLET1_R * 0.02))
            Line((FILLET1_R, -FILLET1_R * 0.02), (FILLET1_R, 0))
        make_face()
    extrude(amount=17.050509207, mode=Mode.SUBTRACT)
    with BuildSketch(Plane(origin=(0, 0, 0), x_dir=(0, 0.3098424150516232, -0.9507879247418837), z_dir=(0, 0.9507879247418837, 0.3098424150516232))) as fillet1_piece_16:
        with BuildLine():
            CenterArc((10 - FILLET1_R, -FILLET1_R), FILLET1_R, 0, 90)
            Line((10 - FILLET1_R, 0), (10 - FILLET1_R, FILLET1_R * 0.02))
            Line((10 - FILLET1_R, FILLET1_R * 0.02), (10 + FILLET1_R * 0.02, FILLET1_R * 0.02))
            Line((10 + FILLET1_R * 0.02, FILLET1_R * 0.02), (10 + FILLET1_R * 0.02, -FILLET1_R))
            Line((10 + FILLET1_R * 0.02, -FILLET1_R), (10, -FILLET1_R))
        make_face()
    revolve(axis=Axis((0, 0, 0), (-1, 0, 0)), revolution_arc=216.0994679, mode=Mode.SUBTRACT)
    with BuildSketch(Plane(origin=(0, 21.741652336, 0.774606038), x_dir=(0, 0.30984241505162313, -0.9507879247418837), z_dir=(0, -0.9507879247418837, -0.30984241505162313))) as fillet1_piece_17a_section:
        with BuildLine():
            CenterArc((FILLET1_R, FILLET1_R), FILLET1_R, 180, 90)
            Line((0, FILLET1_R), (-FILLET1_R * 0.02, FILLET1_R))
            Line((-FILLET1_R * 0.02, FILLET1_R), (-FILLET1_R * 0.02, -FILLET1_R * 0.02))
            Line((-FILLET1_R * 0.02, -FILLET1_R * 0.02), (FILLET1_R, -FILLET1_R * 0.02))
            Line((FILLET1_R, -FILLET1_R * 0.02), (FILLET1_R, 0))
        make_face()
    fillet1_piece_17a = extrude(amount=20.91170631, mode=Mode.PRIVATE)
    fillet1_piece_17a = split(fillet1_piece_17a, bisect_by=Plane(origin=(0.243592095, 20.539413838, -0.382821003), z_dir=(0, 0.30984241505162313, 0.9507879247418837)), keep=Keep.TOP, mode=Mode.PRIVATE)
    with BuildSketch(Plane(origin=(0, 1.85905449, 5.704727548), x_dir=(0, 0.3098424150516232, 0.9507879247418837), z_dir=(0, 0.9507879247418837, -0.30984241505162313))) as fillet1_piece_17b_section:
        with BuildLine():
            CenterArc((FILLET1_R, FILLET1_R), FILLET1_R, 180, 90)
            Line((0, FILLET1_R), (-FILLET1_R * 0.02, FILLET1_R))
            Line((-FILLET1_R * 0.02, FILLET1_R), (-FILLET1_R * 0.02, -FILLET1_R * 0.02))
            Line((-FILLET1_R * 0.02, -FILLET1_R * 0.02), (FILLET1_R, -FILLET1_R * 0.02))
            Line((FILLET1_R, -FILLET1_R * 0.02), (FILLET1_R, 0))
        make_face()
    fillet1_piece_17b = extrude(amount=20.91170631, mode=Mode.PRIVATE)
    fillet1_piece_17b = split(fillet1_piece_17b, bisect_by=Plane(origin=(0.243592095, 20.539413838, 0.382821003), z_dir=(0, 0.30984241505162313, -0.9507879247418837)), keep=Keep.TOP, mode=Mode.PRIVATE)
    fillet1_piece_17 = fillet1_piece_17a & fillet1_piece_17b
    add(fillet1_piece_17, mode=Mode.SUBTRACT)
    with BuildSketch(Plane(origin=(34, 21.741652336, 0.774606038), x_dir=(0, 0.30984241505162313, -0.9507879247418837), z_dir=(0, -0.9507879247418837, -0.30984241505162313))) as fillet1_piece_18a_section:
        with BuildLine():
            CenterArc((FILLET1_R, -FILLET1_R), FILLET1_R, 90, 90)
            Line((0, -FILLET1_R), (-FILLET1_R * 0.02, -FILLET1_R))
            Line((-FILLET1_R * 0.02, -FILLET1_R), (-FILLET1_R * 0.02, FILLET1_R * 0.02))
            Line((-FILLET1_R * 0.02, FILLET1_R * 0.02), (FILLET1_R, FILLET1_R * 0.02))
            Line((FILLET1_R, FILLET1_R * 0.02), (FILLET1_R, 0))
        make_face()
    fillet1_piece_18a = extrude(amount=20.91170631, mode=Mode.PRIVATE)
    fillet1_piece_18a = split(fillet1_piece_18a, bisect_by=Plane(origin=(33.756407905, 20.539413838, -0.382821003), z_dir=(0, 0.30984241505162313, 0.9507879247418837)), keep=Keep.TOP, mode=Mode.PRIVATE)
    with BuildSketch(Plane(origin=(34, 1.85905449, 5.704727548), x_dir=(0, 0.3098424150516232, 0.9507879247418837), z_dir=(0, 0.9507879247418837, -0.30984241505162313))) as fillet1_piece_18b_section:
        with BuildLine():
            CenterArc((FILLET1_R, -FILLET1_R), FILLET1_R, 90, 90)
            Line((0, -FILLET1_R), (-FILLET1_R * 0.02, -FILLET1_R))
            Line((-FILLET1_R * 0.02, -FILLET1_R), (-FILLET1_R * 0.02, FILLET1_R * 0.02))
            Line((-FILLET1_R * 0.02, FILLET1_R * 0.02), (FILLET1_R, FILLET1_R * 0.02))
            Line((FILLET1_R, FILLET1_R * 0.02), (FILLET1_R, 0))
        make_face()
    fillet1_piece_18b = extrude(amount=20.91170631, mode=Mode.PRIVATE)
    fillet1_piece_18b = split(fillet1_piece_18b, bisect_by=Plane(origin=(33.756407905, 20.539413838, 0.382821003), z_dir=(0, 0.30984241505162313, -0.9507879247418837)), keep=Keep.TOP, mode=Mode.PRIVATE)
    fillet1_piece_18 = fillet1_piece_18a & fillet1_piece_18b
    add(fillet1_piece_18, mode=Mode.SUBTRACT)

    # Fillet2
    fillet2_edges = [part.edges().sort_by_distance(p)[0] for p in [
        (33, 25, -3),
        (33, 25, 3),
        (1, 25, 3),
        (1, 25, -3),
    ]]
    fillet(fillet2_edges, radius=FILLET2_R)


solid = part.part
